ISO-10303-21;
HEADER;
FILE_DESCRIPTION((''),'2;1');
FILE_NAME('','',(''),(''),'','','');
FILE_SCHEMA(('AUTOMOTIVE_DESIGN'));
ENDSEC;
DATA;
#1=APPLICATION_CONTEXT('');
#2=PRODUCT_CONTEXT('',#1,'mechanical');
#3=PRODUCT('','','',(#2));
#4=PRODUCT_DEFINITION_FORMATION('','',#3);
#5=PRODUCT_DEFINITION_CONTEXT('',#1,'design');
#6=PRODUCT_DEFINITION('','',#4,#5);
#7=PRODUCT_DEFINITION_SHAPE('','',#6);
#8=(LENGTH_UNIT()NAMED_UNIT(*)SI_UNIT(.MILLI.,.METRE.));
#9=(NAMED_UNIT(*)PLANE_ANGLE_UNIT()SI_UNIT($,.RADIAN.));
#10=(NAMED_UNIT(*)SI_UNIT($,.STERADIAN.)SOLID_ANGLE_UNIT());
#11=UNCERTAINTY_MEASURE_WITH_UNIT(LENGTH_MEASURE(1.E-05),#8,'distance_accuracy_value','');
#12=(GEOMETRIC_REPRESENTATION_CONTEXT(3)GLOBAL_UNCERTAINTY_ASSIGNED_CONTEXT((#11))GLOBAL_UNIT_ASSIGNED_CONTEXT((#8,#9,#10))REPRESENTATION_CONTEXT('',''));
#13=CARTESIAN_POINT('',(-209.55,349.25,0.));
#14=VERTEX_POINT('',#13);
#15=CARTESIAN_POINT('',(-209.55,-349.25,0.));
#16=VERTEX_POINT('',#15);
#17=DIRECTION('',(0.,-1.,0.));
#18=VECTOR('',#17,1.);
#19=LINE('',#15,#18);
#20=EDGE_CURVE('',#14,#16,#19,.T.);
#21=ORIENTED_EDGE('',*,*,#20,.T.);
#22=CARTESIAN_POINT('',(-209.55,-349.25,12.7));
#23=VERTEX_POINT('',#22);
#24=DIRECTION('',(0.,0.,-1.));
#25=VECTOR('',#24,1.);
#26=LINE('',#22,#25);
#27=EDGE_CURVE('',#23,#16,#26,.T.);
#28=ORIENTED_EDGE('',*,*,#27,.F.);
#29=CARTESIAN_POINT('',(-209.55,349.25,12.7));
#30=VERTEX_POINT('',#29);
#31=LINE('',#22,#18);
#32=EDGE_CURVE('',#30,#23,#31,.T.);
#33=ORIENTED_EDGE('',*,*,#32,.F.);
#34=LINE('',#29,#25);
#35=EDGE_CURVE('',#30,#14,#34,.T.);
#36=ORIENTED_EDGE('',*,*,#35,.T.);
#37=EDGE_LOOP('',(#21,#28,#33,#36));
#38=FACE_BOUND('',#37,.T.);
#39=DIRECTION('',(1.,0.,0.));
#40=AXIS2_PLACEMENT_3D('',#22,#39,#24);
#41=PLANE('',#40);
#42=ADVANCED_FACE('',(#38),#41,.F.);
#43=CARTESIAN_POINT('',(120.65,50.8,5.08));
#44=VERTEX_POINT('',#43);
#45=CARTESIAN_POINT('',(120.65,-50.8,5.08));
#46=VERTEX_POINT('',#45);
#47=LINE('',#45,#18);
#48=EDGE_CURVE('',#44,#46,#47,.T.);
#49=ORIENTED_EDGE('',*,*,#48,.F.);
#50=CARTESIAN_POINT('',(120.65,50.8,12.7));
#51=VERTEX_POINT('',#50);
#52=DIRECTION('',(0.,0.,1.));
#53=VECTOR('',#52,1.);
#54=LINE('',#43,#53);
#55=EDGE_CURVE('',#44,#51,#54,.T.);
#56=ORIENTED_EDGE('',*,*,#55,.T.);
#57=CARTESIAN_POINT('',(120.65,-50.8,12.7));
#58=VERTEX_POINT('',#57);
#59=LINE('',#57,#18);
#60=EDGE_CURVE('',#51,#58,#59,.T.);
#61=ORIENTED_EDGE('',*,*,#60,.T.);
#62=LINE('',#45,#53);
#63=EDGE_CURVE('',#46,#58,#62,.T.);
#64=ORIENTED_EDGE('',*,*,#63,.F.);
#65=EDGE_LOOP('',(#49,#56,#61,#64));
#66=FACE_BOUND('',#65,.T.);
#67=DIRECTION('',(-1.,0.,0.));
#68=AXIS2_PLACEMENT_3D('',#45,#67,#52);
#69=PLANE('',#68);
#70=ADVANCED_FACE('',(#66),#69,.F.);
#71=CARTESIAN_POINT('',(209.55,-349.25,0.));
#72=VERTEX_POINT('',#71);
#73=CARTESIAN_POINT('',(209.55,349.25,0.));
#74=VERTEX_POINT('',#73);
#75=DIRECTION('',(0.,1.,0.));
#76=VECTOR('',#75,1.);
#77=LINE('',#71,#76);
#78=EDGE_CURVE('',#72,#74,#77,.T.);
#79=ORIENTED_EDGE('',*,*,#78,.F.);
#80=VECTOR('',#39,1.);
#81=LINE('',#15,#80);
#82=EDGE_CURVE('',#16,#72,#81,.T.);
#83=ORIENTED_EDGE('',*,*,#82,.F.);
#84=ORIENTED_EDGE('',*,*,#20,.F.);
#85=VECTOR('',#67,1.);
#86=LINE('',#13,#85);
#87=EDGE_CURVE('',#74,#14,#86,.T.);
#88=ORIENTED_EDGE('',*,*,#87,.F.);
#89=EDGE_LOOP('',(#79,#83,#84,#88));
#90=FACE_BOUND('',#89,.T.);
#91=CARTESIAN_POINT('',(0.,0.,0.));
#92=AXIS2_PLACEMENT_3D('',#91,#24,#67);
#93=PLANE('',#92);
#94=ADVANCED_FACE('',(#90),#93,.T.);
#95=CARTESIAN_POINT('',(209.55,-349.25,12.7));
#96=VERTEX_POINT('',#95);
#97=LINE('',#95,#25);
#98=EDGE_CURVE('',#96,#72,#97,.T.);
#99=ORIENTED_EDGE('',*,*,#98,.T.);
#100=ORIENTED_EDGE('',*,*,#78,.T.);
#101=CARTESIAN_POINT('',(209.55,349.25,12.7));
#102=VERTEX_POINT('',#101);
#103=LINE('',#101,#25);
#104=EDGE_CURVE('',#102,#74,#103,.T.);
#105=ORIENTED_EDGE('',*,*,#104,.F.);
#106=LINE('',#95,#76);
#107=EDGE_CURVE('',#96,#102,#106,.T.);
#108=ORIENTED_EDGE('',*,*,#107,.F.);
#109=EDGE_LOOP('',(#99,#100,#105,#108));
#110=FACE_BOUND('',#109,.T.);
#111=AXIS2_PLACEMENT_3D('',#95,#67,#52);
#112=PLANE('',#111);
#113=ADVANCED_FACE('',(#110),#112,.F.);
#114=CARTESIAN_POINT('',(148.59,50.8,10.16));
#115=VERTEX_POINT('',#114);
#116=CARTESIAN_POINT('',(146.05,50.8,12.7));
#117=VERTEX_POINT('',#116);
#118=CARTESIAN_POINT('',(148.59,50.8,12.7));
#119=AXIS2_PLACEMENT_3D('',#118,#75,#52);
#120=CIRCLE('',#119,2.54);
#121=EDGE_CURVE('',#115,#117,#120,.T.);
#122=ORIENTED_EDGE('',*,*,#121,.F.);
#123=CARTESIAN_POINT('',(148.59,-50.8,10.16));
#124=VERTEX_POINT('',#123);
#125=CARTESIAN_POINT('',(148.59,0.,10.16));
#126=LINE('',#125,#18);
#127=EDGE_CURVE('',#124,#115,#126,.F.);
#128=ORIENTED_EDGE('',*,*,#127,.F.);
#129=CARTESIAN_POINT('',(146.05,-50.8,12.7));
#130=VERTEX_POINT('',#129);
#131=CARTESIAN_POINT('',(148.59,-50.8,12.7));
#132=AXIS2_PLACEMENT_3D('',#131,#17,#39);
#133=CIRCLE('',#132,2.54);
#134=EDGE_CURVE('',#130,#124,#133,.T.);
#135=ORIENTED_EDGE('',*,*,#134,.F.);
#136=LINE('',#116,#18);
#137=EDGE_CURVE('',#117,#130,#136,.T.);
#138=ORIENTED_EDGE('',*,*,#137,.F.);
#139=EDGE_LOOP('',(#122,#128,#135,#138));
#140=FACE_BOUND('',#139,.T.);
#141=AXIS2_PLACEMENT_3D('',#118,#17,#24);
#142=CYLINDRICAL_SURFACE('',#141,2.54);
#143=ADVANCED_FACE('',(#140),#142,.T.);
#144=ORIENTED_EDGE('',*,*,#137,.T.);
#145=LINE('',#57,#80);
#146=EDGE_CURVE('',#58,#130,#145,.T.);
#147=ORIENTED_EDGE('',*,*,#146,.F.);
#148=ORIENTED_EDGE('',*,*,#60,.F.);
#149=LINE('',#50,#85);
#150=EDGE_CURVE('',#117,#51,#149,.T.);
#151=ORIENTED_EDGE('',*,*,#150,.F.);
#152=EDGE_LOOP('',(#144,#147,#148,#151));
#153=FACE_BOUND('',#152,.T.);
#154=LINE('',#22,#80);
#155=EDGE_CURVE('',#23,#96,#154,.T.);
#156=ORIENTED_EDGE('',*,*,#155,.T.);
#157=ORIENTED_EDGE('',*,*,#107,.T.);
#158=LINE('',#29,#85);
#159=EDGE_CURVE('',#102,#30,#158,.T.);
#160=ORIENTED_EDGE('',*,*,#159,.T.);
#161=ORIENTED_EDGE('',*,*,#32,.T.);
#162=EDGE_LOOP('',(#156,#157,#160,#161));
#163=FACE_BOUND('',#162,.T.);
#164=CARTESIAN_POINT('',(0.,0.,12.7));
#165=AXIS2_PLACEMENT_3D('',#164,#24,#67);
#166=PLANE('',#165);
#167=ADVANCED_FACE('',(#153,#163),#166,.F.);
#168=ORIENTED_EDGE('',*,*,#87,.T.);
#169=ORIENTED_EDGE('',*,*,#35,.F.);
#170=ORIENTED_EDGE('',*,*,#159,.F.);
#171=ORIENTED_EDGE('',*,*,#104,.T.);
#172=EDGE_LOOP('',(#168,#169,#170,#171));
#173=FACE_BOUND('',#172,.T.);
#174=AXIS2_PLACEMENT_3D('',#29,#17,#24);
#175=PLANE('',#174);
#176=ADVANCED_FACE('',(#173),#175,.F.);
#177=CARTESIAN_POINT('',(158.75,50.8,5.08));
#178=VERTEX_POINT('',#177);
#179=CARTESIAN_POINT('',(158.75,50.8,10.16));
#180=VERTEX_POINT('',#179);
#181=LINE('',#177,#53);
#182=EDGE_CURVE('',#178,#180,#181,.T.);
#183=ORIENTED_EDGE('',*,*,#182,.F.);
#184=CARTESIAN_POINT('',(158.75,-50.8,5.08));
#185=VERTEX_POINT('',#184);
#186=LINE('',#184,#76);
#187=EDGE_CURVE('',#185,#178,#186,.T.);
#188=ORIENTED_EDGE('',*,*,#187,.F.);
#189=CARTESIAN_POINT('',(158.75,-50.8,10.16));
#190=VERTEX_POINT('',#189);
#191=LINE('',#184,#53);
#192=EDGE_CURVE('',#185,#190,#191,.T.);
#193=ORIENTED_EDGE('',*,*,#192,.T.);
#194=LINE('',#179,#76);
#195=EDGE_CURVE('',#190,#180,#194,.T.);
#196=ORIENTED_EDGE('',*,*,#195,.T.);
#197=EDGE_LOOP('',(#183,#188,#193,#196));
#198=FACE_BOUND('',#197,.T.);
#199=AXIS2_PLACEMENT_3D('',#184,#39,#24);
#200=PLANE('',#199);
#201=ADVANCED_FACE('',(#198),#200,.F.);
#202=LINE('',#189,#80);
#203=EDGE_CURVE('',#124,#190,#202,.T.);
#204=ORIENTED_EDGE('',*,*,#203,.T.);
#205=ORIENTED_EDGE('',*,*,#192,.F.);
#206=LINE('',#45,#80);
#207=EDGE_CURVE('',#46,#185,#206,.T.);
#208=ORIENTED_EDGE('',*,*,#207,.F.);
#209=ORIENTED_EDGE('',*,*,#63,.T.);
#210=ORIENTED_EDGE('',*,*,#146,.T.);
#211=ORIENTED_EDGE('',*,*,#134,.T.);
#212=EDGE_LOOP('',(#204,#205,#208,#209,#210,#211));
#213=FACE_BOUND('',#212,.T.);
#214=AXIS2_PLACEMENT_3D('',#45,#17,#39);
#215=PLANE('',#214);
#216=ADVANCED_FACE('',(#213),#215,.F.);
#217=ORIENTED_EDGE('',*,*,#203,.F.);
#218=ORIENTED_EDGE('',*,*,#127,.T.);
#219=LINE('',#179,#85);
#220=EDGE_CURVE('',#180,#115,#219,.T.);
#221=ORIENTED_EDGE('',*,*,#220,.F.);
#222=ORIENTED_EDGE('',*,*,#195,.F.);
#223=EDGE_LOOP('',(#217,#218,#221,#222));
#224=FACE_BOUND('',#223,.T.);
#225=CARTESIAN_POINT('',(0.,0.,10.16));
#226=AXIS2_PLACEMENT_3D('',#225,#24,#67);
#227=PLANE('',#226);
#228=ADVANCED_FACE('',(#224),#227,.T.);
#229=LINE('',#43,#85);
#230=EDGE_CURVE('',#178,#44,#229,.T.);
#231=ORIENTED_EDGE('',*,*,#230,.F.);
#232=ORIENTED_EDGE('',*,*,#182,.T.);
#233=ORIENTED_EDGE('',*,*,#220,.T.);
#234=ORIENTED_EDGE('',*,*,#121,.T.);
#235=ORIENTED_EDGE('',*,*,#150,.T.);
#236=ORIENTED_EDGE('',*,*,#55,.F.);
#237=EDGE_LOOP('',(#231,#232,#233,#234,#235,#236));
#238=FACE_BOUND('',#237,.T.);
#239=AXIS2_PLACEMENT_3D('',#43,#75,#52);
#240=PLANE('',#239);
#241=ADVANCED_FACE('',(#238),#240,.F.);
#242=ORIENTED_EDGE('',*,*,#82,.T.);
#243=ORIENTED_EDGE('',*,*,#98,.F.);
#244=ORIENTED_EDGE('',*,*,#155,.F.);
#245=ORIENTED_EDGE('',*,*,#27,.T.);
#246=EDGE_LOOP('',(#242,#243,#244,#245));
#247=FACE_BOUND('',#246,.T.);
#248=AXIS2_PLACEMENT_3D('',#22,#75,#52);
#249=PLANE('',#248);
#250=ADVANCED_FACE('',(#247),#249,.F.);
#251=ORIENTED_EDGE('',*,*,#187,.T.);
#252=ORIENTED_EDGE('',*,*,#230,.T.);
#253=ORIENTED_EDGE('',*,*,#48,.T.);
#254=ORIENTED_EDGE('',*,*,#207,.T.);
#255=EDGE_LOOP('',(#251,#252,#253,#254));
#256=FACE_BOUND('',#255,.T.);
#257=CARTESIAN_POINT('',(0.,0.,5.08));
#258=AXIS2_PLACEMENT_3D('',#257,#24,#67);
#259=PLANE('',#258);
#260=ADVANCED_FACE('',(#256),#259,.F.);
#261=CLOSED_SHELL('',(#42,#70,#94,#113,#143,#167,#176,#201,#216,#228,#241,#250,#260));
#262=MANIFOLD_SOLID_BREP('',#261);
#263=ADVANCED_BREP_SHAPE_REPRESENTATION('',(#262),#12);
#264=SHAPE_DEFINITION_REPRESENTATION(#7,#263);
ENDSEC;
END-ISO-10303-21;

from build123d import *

# Parameters (mm, degrees)
SKETCH1_W           = 419.1
SKETCH1_H           = 698.5
BOSS_EXTRUDE1_DEPTH = 12.7
SKETCH2_W           = 38.1
SKETCH2_H           = 101.6
CUT_EXTRUDE1_DEPTH  = 7.62
SKETCH3_W           = 12.7
SKETCH3_H           = 101.6
BOSS_EXTRUDE2_DEPTH = 2.54
FILLET1_R           = 2.54


with BuildPart() as part:
    # Sketch1 → Boss-Extrude1 (new body)
    with BuildSketch(Plane.XY):
        Rectangle(SKETCH1_W, SKETCH1_H)
    extrude(amount=BOSS_EXTRUDE1_DEPTH)

    # Sketch2 → Cut-Extrude1 (cut)
    with BuildSketch(Plane.XY.offset(12.7)):
        with Locations((139.7, 0)):
            Rectangle(SKETCH2_W, SKETCH2_H)
    extrude(amount=-CUT_EXTRUDE1_DEPTH, mode=Mode.SUBTRACT)

    # Sketch3 → Boss-Extrude2 (add)
    with BuildSketch(Plane.XY.offset(12.7)):
        with Locations((152.4, 0)):
            Rectangle(SKETCH3_W, SKETCH3_H)
    extrude(amount=-BOSS_EXTRUDE2_DEPTH)

    # Fillet1
    fillet1_edges = [part.edges().sort_by_distance(p)[0] for p in [
        (146.05, 0, 10.16),
    ]]
    fillet(fillet1_edges, radius=FILLET1_R - 0.0001)  # a hair under: the kernel refuses the full size


solid = part.part
